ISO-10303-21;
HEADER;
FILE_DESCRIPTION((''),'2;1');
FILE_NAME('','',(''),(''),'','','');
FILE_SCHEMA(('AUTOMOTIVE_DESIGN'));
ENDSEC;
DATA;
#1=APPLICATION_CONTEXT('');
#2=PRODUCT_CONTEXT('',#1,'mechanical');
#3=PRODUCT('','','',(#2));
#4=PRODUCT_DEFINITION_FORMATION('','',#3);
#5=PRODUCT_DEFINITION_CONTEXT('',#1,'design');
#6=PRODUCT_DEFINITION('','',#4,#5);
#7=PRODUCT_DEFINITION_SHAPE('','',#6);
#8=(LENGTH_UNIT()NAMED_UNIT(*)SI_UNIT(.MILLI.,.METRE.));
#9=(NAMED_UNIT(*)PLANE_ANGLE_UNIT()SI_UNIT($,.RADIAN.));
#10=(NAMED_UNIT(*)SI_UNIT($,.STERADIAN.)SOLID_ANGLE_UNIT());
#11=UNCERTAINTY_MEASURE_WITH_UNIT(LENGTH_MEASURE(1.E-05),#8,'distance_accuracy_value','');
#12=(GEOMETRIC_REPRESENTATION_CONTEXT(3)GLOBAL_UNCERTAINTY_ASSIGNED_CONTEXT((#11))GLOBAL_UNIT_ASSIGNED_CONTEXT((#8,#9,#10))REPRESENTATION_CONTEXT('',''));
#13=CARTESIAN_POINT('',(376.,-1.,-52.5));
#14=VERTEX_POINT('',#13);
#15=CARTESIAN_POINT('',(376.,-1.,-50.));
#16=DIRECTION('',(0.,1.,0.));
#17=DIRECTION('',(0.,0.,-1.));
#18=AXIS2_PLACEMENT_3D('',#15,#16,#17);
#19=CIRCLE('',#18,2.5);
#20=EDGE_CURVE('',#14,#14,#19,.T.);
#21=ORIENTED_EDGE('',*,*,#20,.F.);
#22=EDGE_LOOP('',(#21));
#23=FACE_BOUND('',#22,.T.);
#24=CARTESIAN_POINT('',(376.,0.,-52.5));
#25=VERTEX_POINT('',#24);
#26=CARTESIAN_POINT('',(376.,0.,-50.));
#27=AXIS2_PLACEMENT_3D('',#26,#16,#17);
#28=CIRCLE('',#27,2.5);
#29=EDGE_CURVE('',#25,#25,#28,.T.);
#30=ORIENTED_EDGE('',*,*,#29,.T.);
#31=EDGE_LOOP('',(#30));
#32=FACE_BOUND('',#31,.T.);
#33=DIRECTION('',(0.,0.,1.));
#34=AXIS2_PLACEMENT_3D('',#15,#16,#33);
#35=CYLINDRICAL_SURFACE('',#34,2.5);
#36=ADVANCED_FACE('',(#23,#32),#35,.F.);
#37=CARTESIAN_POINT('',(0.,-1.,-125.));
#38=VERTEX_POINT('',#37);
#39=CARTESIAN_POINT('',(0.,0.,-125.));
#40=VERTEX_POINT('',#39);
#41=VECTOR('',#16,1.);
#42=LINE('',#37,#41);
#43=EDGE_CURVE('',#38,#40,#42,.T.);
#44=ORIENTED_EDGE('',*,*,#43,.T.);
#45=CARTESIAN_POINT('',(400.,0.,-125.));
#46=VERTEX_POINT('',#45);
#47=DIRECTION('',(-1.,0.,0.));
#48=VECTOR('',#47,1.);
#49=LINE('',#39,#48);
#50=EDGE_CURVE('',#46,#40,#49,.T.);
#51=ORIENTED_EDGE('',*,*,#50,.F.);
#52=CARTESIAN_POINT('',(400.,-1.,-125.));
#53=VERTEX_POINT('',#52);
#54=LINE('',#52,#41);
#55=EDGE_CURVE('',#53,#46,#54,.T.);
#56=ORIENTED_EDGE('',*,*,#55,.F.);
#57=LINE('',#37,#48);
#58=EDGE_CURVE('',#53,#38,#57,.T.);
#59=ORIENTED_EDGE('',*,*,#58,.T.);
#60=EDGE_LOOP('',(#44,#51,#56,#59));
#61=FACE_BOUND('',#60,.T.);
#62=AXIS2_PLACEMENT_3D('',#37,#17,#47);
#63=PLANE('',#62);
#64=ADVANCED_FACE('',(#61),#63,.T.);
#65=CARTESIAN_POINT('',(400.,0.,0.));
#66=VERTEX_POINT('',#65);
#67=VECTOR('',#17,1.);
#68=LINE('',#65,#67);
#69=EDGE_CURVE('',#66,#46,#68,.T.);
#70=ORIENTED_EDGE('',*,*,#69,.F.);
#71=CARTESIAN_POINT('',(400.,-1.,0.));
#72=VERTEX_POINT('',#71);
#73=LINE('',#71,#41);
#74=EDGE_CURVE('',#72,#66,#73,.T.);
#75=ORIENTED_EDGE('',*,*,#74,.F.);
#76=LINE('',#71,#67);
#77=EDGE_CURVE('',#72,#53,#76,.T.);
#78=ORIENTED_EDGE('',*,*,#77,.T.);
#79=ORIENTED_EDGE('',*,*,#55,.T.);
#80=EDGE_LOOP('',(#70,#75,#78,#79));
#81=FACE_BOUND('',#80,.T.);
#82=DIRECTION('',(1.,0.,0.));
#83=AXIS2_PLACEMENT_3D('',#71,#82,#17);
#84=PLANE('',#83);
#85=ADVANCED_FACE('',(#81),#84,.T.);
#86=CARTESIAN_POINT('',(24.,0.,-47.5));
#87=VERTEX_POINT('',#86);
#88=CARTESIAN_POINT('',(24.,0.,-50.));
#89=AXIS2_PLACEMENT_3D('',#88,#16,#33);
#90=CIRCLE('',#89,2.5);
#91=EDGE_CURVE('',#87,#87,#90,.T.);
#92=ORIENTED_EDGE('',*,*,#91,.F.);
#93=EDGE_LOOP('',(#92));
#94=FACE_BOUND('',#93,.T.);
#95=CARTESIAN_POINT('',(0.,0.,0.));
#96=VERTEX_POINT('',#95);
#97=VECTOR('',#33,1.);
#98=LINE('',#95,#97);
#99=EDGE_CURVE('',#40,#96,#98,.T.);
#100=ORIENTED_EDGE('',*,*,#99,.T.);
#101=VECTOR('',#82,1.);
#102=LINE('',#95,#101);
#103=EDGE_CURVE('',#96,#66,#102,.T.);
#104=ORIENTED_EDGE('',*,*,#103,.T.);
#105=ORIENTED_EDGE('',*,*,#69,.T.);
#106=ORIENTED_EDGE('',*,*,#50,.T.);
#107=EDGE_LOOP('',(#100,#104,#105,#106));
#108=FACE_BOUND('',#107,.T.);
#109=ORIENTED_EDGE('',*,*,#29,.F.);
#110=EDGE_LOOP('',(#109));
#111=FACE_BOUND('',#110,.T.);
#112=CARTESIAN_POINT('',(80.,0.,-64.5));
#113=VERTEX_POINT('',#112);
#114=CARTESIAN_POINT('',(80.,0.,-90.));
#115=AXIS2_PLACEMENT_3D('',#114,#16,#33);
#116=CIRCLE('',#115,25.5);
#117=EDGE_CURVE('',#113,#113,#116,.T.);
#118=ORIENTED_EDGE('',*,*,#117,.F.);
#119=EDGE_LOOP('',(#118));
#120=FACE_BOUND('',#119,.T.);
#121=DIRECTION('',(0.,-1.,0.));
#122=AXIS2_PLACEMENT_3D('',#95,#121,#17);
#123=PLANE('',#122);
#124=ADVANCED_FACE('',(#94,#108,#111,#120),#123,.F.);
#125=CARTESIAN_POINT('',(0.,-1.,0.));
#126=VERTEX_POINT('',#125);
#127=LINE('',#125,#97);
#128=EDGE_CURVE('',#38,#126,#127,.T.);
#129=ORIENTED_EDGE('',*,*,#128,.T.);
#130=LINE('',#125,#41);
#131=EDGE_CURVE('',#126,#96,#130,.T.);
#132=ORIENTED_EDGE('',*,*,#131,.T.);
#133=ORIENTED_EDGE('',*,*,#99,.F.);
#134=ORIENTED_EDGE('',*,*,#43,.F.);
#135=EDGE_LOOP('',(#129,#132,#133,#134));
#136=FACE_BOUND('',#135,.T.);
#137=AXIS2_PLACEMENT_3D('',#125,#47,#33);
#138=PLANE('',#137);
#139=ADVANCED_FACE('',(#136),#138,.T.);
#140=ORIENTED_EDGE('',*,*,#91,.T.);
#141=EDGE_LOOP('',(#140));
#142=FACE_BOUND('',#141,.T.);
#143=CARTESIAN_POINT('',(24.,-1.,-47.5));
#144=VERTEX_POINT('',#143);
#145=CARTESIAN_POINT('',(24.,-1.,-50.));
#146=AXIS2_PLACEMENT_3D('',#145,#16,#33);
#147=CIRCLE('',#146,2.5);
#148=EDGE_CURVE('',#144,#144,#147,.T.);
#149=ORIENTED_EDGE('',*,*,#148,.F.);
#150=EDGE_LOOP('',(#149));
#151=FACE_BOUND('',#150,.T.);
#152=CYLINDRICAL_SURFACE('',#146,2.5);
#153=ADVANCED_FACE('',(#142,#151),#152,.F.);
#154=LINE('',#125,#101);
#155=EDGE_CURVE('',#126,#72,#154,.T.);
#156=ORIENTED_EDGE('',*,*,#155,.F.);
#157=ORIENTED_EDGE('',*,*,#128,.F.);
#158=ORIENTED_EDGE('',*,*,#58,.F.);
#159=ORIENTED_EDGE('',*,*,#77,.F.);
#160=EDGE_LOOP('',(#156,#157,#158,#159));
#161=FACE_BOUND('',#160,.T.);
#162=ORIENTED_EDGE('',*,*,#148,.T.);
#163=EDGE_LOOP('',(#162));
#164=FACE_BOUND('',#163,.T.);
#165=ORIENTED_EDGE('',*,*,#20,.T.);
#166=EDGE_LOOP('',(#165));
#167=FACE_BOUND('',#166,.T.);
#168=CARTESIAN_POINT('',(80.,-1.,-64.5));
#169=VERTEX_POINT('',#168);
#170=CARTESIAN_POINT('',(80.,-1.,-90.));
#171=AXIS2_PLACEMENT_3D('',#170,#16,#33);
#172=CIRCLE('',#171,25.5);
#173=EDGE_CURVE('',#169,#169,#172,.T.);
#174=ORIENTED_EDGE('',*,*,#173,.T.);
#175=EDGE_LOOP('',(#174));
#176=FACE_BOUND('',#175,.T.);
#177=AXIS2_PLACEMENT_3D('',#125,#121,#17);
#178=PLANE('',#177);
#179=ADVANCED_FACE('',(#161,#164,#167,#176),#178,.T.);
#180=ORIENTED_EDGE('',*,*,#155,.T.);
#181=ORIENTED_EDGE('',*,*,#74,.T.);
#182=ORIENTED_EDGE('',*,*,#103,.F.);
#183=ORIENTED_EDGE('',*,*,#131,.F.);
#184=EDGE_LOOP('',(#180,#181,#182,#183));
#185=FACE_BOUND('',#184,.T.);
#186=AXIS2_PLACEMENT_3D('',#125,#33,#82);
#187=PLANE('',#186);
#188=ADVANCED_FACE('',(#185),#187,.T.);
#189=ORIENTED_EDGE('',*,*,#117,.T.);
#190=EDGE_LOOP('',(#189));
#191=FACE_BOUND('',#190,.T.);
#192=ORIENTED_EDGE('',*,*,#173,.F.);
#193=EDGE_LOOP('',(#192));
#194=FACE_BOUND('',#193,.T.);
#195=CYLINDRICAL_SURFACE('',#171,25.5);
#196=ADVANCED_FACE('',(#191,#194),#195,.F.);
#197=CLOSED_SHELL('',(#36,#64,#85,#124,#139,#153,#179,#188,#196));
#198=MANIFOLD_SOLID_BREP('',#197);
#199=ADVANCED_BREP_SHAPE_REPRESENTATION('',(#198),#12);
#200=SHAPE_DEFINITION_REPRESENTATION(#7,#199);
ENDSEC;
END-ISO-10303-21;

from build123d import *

# Parameters (mm, degrees)
SKETCH_2_W             = 400
SKETCH_2_H             = 125
SKETCH_2_R             = 2.5
SM_BASE_FLANGE_1_DEPTH = 1
SKETCH_3_R             = 25.5
CUT_EXTRUDE_1_DEPTH    = 420.077558454


# Sheet-metal steps are written as plain solids
with BuildPart() as part:
    # Sketch 2 → Базовая кромка1 (new body)
    with BuildSketch(Plane(origin=(0, 0, 0), x_dir=(1, 0, 0), z_dir=(0, 1, 0))):
        with Locations((200, 62.5)):
            Rectangle(SKETCH_2_W, SKETCH_2_H)
        with Locations(Location((24, 50, 0), (0, 0, 270))):
            Circle(SKETCH_2_R, mode=Mode.SUBTRACT)
        with Locations(Location((376, 50, 0), (0, 0, 90))):
            Circle(SKETCH_2_R, mode=Mode.SUBTRACT)
    extrude(amount=-SM_BASE_FLANGE_1_DEPTH)

    # Эскиз3 → Вырез-Вытянуть1 (cut, through all)
    with BuildSketch(Plane(origin=(0, 0, 0), x_dir=(1, 0, 0), z_dir=(0, 1, 0))):
        with Locations(Location((80, 90, 0), (0, 0, 270))):
            Circle(SKETCH_3_R)
    extrude(amount=-CUT_EXTRUDE_1_DEPTH, mode=Mode.SUBTRACT)


solid = part.part
